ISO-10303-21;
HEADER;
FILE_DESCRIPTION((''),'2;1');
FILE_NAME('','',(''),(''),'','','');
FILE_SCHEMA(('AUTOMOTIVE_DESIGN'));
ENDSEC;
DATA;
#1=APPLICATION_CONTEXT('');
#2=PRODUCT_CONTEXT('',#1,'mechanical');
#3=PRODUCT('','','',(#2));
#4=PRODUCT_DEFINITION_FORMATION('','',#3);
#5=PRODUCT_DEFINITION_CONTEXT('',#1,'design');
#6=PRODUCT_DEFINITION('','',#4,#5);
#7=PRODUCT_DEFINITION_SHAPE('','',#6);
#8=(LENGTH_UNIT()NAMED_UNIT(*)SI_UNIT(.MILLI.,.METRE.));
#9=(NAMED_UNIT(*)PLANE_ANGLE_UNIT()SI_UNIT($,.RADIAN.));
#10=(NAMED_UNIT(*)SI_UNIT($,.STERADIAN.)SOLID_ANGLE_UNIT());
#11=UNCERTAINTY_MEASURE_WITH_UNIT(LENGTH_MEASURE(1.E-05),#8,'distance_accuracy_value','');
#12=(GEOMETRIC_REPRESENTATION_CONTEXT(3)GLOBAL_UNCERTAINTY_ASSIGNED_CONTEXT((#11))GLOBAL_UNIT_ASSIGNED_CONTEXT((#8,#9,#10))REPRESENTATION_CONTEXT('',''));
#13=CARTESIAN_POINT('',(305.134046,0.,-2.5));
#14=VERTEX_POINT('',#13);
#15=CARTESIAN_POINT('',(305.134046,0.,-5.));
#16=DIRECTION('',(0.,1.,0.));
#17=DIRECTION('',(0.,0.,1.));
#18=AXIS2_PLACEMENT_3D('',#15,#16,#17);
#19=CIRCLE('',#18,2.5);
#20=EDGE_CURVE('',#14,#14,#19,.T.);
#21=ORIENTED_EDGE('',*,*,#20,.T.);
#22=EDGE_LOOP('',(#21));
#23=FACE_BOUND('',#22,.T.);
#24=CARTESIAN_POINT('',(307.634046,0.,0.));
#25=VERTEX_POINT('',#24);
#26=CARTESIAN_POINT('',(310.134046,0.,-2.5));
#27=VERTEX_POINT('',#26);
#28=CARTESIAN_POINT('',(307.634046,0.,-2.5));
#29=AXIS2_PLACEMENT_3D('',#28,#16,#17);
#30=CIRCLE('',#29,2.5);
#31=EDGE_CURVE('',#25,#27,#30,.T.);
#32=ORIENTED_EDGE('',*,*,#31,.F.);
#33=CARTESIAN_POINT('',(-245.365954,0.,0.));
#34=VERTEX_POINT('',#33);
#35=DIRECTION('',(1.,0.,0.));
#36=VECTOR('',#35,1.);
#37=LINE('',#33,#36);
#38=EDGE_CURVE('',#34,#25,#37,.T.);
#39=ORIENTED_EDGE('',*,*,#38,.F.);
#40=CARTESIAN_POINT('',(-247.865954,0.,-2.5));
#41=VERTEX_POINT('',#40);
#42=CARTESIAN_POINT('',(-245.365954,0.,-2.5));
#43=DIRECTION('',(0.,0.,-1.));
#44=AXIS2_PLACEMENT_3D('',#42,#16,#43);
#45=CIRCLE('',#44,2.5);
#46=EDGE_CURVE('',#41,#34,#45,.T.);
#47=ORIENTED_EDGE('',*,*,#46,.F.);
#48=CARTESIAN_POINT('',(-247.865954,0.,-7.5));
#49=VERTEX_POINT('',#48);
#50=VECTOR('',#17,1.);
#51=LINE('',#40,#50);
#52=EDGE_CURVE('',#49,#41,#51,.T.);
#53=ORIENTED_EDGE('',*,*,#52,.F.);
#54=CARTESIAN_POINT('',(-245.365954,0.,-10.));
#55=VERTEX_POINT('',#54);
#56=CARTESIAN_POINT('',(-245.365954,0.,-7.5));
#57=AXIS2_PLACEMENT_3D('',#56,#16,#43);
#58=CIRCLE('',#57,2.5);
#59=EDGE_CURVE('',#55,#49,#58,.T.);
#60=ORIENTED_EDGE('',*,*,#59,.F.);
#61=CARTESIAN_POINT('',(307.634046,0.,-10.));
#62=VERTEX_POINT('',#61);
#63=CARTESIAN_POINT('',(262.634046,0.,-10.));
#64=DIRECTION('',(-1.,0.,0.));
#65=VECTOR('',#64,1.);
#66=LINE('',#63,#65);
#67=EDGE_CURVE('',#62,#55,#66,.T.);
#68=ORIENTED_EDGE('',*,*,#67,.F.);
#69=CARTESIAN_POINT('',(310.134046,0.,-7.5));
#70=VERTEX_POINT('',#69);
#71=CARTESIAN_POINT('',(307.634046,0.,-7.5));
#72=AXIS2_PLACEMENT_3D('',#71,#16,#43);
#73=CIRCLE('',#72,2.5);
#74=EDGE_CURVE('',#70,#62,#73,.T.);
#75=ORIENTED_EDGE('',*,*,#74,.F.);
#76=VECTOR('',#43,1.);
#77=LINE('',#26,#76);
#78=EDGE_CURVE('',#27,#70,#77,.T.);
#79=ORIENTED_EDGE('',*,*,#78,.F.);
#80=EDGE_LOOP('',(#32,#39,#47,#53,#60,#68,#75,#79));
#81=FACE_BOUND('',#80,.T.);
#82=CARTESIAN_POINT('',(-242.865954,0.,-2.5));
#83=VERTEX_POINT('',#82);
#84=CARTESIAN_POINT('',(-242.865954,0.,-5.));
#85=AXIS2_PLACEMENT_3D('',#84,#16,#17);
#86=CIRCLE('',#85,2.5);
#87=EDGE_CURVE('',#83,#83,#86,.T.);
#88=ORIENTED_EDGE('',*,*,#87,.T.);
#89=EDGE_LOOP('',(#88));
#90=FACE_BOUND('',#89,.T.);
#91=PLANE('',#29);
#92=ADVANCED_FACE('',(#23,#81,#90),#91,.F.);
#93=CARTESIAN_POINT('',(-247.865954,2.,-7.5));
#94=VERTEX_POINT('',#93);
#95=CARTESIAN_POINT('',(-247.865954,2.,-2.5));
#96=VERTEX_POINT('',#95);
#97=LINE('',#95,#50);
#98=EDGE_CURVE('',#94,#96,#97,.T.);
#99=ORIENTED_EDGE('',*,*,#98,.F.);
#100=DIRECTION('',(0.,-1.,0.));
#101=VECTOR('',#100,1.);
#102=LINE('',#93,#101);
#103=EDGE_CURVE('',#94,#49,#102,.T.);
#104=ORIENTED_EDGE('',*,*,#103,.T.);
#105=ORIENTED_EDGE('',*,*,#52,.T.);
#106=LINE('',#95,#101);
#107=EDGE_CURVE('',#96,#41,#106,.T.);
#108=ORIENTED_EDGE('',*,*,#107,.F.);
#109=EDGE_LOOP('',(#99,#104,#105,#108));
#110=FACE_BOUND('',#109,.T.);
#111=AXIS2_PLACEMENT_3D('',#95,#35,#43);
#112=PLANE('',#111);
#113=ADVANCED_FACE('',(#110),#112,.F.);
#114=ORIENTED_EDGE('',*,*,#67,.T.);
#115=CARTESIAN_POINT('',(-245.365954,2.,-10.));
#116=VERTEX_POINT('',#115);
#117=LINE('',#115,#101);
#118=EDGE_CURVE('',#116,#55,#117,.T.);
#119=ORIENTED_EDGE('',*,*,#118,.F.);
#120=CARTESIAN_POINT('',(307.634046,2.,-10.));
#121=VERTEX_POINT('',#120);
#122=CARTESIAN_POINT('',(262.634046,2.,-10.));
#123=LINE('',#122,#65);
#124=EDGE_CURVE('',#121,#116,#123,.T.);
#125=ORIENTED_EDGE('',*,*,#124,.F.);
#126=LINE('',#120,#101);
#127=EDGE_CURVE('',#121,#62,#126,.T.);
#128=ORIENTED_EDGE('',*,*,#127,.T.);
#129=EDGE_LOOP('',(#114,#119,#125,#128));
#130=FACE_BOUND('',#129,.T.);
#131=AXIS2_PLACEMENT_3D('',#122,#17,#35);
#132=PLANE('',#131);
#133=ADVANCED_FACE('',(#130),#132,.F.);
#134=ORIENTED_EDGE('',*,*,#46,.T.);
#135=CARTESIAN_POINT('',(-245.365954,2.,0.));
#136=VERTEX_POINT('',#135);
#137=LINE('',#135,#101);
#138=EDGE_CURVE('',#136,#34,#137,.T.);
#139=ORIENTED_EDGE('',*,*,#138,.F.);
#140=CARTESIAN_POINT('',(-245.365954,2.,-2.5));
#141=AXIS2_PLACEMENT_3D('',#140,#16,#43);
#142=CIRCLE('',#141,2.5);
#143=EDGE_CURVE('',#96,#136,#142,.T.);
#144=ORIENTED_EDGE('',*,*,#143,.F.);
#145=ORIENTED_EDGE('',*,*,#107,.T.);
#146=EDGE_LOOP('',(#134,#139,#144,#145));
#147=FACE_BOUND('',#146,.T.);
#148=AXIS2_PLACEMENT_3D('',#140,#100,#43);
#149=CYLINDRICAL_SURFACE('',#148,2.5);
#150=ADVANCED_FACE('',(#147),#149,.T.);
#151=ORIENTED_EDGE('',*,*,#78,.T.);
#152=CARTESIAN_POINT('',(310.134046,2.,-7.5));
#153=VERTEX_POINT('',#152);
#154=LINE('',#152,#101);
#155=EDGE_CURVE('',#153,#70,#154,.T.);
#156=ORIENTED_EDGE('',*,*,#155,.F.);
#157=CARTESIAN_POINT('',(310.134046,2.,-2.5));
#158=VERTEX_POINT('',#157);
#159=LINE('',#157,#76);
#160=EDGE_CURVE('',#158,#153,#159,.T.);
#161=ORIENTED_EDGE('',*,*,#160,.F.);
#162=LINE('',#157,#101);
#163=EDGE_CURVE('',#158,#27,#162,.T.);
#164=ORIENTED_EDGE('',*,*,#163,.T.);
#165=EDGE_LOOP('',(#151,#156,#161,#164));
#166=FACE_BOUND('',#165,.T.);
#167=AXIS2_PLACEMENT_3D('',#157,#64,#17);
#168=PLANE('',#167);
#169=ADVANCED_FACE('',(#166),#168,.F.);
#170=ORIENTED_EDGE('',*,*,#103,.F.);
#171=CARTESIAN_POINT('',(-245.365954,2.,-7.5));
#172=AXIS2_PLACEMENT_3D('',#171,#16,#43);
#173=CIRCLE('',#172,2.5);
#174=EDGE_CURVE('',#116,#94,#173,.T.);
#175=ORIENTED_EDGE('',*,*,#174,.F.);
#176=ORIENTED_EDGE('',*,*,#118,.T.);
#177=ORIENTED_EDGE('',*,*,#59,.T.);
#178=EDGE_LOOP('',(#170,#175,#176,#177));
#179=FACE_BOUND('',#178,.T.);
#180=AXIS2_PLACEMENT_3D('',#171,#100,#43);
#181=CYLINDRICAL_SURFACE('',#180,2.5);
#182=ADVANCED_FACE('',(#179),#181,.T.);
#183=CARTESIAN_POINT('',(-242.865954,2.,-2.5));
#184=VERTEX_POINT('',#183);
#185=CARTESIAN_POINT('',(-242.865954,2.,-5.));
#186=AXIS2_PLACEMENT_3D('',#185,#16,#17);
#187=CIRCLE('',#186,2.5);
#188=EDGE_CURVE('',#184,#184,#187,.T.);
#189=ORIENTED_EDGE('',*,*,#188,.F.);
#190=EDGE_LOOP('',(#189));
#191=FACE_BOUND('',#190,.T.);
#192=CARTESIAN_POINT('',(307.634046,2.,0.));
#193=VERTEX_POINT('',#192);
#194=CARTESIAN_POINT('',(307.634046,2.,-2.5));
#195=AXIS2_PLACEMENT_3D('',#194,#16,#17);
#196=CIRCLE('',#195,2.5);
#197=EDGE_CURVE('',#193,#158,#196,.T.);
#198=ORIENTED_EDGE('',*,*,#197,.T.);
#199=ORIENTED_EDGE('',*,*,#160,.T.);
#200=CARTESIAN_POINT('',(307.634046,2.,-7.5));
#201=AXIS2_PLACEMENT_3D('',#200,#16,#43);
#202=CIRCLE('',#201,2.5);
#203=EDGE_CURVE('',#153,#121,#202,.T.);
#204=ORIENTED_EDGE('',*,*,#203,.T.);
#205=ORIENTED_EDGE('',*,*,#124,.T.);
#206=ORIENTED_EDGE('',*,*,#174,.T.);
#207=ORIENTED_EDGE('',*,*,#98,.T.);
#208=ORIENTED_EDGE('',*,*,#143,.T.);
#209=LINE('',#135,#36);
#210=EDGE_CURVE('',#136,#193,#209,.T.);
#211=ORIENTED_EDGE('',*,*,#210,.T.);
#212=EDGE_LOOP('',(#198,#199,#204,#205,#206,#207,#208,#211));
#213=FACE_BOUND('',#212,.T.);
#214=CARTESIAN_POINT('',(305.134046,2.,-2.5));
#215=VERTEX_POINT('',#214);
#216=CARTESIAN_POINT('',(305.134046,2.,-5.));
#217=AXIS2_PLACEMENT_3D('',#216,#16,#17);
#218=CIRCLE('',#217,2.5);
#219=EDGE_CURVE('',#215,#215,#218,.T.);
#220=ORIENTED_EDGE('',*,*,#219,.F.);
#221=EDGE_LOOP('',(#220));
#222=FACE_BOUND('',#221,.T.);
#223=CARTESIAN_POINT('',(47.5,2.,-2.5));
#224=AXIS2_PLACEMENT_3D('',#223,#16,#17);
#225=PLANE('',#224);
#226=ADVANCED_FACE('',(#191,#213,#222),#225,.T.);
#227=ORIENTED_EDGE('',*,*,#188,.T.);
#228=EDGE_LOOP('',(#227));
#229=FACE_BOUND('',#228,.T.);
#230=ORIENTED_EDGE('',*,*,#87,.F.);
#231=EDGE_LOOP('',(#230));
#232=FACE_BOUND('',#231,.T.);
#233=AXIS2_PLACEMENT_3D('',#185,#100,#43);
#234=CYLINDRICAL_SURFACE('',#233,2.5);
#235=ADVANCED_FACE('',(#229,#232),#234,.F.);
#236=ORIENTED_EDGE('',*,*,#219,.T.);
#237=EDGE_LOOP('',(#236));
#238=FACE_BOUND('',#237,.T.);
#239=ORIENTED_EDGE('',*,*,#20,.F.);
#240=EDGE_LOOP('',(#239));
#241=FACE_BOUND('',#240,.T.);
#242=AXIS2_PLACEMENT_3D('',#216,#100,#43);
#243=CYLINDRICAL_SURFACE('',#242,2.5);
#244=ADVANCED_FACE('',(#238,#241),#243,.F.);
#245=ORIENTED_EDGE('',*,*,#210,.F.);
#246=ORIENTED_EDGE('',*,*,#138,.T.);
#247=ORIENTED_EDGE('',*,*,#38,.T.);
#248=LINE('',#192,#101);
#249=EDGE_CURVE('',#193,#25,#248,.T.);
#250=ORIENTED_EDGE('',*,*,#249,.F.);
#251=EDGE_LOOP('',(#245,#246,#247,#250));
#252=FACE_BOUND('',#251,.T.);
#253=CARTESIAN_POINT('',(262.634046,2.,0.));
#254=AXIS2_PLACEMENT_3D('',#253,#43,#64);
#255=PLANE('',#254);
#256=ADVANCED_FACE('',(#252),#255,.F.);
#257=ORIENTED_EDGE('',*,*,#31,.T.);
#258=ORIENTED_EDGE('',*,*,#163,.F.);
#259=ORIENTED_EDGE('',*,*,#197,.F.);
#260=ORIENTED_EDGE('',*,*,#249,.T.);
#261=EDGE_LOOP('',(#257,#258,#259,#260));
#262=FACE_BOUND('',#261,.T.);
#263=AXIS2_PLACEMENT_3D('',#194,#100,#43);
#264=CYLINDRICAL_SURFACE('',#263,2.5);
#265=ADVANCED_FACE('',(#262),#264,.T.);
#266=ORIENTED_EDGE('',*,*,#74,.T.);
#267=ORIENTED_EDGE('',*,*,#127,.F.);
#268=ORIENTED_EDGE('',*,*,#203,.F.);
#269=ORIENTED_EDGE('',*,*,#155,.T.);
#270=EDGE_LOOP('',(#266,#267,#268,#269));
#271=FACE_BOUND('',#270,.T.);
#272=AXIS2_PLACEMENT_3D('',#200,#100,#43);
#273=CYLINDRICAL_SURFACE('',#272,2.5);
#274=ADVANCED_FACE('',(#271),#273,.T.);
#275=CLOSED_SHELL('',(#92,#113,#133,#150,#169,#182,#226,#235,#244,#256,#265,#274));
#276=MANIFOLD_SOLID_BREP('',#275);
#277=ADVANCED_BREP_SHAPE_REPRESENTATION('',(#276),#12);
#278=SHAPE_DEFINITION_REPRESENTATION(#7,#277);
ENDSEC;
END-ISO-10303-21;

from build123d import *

# Parameters (mm, degrees)
SKETCH1_R           = 2.5
BOSS_EXTRUDE2_DEPTH = 2
FLEX1_OUTLINE_R     = 2.5
FLEX1_DEPTH         = 2


# Read off the part's stored shape, not the designer's step: Flex1
with BuildPart() as part:
    # Sketch1 → Boss-Extrude2 (new body)
    with BuildSketch(Plane(origin=(0, 0, 0), x_dir=(1, 0, 0), z_dir=(0, 1, 0))):
        with BuildLine():
            Line((2.5, 0), (47.5, 0))
            ThreePointArc((47.5, 0), (49.267766953, 0.732233047), (50, 2.5))
            Line((50, 2.5), (50, 7.5))
            ThreePointArc((50, 7.5), (49.267766953, 9.267766953), (47.5, 10))
            Line((47.5, 10), (2.5, 10))
            ThreePointArc((2.5, 10), (0.732233047, 9.267766953), (0, 7.5))
            Line((0, 7.5), (0, 2.5))
            ThreePointArc((0, 2.5), (0.732233047, 0.732233047), (2.5, 0))
        make_face()
        with Locations(Location((5, 5, 0), (0, 0, 270))):
            Circle(SKETCH1_R, mode=Mode.SUBTRACT)
        with Locations(Location((45, 5, 0), (0, 0, 270))):
            Circle(SKETCH1_R, mode=Mode.SUBTRACT)
    extrude(amount=BOSS_EXTRUDE2_DEPTH)

    # Flex1 outline → Flex1 (add)
    # profile 1 of 4: a face of its own
    with BuildSketch(Plane(origin=(0, 0, 0), x_dir=(1, 0, 0), z_dir=(0, 1, 0))):
        with BuildLine():
            Line((2.5, 10), (-245.365954186, 10))
            ThreePointArc((-245.365954186, 10), (-247.133721139, 9.267766953), (-247.865954186, 7.5))
            Line((-247.865954186, 7.5), (-247.865954186, 2.5))
            ThreePointArc((-247.865954186, 2.5), (-247.133721139, 0.732233047), (-245.365954186, 0))
            Line((-245.365954186, 0), (2.5, 0))
            ThreePointArc((2.5, 0), (0.732233047, 0.732233047), (0, 2.5))
            Line((0, 2.5), (0, 7.5))
            ThreePointArc((0, 7.5), (0.732233047, 9.267766953), (2.5, 10))
        make_face()
        with Locations((-242.865954186, 5)):
            Circle(FLEX1_OUTLINE_R, mode=Mode.SUBTRACT)
    # profile 2 of 4: a face of its own
    with BuildSketch(Plane(origin=(0, 0, 0), x_dir=(1, 0, 0), z_dir=(0, 1, 0))):
        with BuildLine():
            Line((307.634045814, 10), (47.5, 10))
            ThreePointArc((47.5, 10), (49.267766953, 9.267766953), (50, 7.5))
            Line((50, 7.5), (50, 2.5))
            ThreePointArc((50, 2.5), (49.267766953, 0.732233047), (47.5, 0))
            Line((47.5, 0), (307.634045814, 0))
            ThreePointArc((307.634045814, 0), (309.401812767, 0.732233047), (310.134045814, 2.5))
            Line((310.134045814, 2.5), (310.134045814, 7.5))
            ThreePointArc((310.134045814, 7.5), (309.401812767, 9.267766953), (307.634045814, 10))
        make_face()
        with Locations((305.134045814, 5)):
            Circle(FLEX1_OUTLINE_R, mode=Mode.SUBTRACT)
    # profile 3 of 4: a face of its own
    with BuildSketch(Plane(origin=(0, 0, 0), x_dir=(1, 0, 0), z_dir=(0, 1, 0))):
        with Locations((5, 5)):
            Circle(FLEX1_OUTLINE_R)
    # profile 4 of 4: a face of its own
    with BuildSketch(Plane(origin=(0, 0, 0), x_dir=(1, 0, 0), z_dir=(0, 1, 0))):
        with Locations((45, 5)):
            Circle(FLEX1_OUTLINE_R)
    extrude(amount=FLEX1_DEPTH)


solid = part.part
